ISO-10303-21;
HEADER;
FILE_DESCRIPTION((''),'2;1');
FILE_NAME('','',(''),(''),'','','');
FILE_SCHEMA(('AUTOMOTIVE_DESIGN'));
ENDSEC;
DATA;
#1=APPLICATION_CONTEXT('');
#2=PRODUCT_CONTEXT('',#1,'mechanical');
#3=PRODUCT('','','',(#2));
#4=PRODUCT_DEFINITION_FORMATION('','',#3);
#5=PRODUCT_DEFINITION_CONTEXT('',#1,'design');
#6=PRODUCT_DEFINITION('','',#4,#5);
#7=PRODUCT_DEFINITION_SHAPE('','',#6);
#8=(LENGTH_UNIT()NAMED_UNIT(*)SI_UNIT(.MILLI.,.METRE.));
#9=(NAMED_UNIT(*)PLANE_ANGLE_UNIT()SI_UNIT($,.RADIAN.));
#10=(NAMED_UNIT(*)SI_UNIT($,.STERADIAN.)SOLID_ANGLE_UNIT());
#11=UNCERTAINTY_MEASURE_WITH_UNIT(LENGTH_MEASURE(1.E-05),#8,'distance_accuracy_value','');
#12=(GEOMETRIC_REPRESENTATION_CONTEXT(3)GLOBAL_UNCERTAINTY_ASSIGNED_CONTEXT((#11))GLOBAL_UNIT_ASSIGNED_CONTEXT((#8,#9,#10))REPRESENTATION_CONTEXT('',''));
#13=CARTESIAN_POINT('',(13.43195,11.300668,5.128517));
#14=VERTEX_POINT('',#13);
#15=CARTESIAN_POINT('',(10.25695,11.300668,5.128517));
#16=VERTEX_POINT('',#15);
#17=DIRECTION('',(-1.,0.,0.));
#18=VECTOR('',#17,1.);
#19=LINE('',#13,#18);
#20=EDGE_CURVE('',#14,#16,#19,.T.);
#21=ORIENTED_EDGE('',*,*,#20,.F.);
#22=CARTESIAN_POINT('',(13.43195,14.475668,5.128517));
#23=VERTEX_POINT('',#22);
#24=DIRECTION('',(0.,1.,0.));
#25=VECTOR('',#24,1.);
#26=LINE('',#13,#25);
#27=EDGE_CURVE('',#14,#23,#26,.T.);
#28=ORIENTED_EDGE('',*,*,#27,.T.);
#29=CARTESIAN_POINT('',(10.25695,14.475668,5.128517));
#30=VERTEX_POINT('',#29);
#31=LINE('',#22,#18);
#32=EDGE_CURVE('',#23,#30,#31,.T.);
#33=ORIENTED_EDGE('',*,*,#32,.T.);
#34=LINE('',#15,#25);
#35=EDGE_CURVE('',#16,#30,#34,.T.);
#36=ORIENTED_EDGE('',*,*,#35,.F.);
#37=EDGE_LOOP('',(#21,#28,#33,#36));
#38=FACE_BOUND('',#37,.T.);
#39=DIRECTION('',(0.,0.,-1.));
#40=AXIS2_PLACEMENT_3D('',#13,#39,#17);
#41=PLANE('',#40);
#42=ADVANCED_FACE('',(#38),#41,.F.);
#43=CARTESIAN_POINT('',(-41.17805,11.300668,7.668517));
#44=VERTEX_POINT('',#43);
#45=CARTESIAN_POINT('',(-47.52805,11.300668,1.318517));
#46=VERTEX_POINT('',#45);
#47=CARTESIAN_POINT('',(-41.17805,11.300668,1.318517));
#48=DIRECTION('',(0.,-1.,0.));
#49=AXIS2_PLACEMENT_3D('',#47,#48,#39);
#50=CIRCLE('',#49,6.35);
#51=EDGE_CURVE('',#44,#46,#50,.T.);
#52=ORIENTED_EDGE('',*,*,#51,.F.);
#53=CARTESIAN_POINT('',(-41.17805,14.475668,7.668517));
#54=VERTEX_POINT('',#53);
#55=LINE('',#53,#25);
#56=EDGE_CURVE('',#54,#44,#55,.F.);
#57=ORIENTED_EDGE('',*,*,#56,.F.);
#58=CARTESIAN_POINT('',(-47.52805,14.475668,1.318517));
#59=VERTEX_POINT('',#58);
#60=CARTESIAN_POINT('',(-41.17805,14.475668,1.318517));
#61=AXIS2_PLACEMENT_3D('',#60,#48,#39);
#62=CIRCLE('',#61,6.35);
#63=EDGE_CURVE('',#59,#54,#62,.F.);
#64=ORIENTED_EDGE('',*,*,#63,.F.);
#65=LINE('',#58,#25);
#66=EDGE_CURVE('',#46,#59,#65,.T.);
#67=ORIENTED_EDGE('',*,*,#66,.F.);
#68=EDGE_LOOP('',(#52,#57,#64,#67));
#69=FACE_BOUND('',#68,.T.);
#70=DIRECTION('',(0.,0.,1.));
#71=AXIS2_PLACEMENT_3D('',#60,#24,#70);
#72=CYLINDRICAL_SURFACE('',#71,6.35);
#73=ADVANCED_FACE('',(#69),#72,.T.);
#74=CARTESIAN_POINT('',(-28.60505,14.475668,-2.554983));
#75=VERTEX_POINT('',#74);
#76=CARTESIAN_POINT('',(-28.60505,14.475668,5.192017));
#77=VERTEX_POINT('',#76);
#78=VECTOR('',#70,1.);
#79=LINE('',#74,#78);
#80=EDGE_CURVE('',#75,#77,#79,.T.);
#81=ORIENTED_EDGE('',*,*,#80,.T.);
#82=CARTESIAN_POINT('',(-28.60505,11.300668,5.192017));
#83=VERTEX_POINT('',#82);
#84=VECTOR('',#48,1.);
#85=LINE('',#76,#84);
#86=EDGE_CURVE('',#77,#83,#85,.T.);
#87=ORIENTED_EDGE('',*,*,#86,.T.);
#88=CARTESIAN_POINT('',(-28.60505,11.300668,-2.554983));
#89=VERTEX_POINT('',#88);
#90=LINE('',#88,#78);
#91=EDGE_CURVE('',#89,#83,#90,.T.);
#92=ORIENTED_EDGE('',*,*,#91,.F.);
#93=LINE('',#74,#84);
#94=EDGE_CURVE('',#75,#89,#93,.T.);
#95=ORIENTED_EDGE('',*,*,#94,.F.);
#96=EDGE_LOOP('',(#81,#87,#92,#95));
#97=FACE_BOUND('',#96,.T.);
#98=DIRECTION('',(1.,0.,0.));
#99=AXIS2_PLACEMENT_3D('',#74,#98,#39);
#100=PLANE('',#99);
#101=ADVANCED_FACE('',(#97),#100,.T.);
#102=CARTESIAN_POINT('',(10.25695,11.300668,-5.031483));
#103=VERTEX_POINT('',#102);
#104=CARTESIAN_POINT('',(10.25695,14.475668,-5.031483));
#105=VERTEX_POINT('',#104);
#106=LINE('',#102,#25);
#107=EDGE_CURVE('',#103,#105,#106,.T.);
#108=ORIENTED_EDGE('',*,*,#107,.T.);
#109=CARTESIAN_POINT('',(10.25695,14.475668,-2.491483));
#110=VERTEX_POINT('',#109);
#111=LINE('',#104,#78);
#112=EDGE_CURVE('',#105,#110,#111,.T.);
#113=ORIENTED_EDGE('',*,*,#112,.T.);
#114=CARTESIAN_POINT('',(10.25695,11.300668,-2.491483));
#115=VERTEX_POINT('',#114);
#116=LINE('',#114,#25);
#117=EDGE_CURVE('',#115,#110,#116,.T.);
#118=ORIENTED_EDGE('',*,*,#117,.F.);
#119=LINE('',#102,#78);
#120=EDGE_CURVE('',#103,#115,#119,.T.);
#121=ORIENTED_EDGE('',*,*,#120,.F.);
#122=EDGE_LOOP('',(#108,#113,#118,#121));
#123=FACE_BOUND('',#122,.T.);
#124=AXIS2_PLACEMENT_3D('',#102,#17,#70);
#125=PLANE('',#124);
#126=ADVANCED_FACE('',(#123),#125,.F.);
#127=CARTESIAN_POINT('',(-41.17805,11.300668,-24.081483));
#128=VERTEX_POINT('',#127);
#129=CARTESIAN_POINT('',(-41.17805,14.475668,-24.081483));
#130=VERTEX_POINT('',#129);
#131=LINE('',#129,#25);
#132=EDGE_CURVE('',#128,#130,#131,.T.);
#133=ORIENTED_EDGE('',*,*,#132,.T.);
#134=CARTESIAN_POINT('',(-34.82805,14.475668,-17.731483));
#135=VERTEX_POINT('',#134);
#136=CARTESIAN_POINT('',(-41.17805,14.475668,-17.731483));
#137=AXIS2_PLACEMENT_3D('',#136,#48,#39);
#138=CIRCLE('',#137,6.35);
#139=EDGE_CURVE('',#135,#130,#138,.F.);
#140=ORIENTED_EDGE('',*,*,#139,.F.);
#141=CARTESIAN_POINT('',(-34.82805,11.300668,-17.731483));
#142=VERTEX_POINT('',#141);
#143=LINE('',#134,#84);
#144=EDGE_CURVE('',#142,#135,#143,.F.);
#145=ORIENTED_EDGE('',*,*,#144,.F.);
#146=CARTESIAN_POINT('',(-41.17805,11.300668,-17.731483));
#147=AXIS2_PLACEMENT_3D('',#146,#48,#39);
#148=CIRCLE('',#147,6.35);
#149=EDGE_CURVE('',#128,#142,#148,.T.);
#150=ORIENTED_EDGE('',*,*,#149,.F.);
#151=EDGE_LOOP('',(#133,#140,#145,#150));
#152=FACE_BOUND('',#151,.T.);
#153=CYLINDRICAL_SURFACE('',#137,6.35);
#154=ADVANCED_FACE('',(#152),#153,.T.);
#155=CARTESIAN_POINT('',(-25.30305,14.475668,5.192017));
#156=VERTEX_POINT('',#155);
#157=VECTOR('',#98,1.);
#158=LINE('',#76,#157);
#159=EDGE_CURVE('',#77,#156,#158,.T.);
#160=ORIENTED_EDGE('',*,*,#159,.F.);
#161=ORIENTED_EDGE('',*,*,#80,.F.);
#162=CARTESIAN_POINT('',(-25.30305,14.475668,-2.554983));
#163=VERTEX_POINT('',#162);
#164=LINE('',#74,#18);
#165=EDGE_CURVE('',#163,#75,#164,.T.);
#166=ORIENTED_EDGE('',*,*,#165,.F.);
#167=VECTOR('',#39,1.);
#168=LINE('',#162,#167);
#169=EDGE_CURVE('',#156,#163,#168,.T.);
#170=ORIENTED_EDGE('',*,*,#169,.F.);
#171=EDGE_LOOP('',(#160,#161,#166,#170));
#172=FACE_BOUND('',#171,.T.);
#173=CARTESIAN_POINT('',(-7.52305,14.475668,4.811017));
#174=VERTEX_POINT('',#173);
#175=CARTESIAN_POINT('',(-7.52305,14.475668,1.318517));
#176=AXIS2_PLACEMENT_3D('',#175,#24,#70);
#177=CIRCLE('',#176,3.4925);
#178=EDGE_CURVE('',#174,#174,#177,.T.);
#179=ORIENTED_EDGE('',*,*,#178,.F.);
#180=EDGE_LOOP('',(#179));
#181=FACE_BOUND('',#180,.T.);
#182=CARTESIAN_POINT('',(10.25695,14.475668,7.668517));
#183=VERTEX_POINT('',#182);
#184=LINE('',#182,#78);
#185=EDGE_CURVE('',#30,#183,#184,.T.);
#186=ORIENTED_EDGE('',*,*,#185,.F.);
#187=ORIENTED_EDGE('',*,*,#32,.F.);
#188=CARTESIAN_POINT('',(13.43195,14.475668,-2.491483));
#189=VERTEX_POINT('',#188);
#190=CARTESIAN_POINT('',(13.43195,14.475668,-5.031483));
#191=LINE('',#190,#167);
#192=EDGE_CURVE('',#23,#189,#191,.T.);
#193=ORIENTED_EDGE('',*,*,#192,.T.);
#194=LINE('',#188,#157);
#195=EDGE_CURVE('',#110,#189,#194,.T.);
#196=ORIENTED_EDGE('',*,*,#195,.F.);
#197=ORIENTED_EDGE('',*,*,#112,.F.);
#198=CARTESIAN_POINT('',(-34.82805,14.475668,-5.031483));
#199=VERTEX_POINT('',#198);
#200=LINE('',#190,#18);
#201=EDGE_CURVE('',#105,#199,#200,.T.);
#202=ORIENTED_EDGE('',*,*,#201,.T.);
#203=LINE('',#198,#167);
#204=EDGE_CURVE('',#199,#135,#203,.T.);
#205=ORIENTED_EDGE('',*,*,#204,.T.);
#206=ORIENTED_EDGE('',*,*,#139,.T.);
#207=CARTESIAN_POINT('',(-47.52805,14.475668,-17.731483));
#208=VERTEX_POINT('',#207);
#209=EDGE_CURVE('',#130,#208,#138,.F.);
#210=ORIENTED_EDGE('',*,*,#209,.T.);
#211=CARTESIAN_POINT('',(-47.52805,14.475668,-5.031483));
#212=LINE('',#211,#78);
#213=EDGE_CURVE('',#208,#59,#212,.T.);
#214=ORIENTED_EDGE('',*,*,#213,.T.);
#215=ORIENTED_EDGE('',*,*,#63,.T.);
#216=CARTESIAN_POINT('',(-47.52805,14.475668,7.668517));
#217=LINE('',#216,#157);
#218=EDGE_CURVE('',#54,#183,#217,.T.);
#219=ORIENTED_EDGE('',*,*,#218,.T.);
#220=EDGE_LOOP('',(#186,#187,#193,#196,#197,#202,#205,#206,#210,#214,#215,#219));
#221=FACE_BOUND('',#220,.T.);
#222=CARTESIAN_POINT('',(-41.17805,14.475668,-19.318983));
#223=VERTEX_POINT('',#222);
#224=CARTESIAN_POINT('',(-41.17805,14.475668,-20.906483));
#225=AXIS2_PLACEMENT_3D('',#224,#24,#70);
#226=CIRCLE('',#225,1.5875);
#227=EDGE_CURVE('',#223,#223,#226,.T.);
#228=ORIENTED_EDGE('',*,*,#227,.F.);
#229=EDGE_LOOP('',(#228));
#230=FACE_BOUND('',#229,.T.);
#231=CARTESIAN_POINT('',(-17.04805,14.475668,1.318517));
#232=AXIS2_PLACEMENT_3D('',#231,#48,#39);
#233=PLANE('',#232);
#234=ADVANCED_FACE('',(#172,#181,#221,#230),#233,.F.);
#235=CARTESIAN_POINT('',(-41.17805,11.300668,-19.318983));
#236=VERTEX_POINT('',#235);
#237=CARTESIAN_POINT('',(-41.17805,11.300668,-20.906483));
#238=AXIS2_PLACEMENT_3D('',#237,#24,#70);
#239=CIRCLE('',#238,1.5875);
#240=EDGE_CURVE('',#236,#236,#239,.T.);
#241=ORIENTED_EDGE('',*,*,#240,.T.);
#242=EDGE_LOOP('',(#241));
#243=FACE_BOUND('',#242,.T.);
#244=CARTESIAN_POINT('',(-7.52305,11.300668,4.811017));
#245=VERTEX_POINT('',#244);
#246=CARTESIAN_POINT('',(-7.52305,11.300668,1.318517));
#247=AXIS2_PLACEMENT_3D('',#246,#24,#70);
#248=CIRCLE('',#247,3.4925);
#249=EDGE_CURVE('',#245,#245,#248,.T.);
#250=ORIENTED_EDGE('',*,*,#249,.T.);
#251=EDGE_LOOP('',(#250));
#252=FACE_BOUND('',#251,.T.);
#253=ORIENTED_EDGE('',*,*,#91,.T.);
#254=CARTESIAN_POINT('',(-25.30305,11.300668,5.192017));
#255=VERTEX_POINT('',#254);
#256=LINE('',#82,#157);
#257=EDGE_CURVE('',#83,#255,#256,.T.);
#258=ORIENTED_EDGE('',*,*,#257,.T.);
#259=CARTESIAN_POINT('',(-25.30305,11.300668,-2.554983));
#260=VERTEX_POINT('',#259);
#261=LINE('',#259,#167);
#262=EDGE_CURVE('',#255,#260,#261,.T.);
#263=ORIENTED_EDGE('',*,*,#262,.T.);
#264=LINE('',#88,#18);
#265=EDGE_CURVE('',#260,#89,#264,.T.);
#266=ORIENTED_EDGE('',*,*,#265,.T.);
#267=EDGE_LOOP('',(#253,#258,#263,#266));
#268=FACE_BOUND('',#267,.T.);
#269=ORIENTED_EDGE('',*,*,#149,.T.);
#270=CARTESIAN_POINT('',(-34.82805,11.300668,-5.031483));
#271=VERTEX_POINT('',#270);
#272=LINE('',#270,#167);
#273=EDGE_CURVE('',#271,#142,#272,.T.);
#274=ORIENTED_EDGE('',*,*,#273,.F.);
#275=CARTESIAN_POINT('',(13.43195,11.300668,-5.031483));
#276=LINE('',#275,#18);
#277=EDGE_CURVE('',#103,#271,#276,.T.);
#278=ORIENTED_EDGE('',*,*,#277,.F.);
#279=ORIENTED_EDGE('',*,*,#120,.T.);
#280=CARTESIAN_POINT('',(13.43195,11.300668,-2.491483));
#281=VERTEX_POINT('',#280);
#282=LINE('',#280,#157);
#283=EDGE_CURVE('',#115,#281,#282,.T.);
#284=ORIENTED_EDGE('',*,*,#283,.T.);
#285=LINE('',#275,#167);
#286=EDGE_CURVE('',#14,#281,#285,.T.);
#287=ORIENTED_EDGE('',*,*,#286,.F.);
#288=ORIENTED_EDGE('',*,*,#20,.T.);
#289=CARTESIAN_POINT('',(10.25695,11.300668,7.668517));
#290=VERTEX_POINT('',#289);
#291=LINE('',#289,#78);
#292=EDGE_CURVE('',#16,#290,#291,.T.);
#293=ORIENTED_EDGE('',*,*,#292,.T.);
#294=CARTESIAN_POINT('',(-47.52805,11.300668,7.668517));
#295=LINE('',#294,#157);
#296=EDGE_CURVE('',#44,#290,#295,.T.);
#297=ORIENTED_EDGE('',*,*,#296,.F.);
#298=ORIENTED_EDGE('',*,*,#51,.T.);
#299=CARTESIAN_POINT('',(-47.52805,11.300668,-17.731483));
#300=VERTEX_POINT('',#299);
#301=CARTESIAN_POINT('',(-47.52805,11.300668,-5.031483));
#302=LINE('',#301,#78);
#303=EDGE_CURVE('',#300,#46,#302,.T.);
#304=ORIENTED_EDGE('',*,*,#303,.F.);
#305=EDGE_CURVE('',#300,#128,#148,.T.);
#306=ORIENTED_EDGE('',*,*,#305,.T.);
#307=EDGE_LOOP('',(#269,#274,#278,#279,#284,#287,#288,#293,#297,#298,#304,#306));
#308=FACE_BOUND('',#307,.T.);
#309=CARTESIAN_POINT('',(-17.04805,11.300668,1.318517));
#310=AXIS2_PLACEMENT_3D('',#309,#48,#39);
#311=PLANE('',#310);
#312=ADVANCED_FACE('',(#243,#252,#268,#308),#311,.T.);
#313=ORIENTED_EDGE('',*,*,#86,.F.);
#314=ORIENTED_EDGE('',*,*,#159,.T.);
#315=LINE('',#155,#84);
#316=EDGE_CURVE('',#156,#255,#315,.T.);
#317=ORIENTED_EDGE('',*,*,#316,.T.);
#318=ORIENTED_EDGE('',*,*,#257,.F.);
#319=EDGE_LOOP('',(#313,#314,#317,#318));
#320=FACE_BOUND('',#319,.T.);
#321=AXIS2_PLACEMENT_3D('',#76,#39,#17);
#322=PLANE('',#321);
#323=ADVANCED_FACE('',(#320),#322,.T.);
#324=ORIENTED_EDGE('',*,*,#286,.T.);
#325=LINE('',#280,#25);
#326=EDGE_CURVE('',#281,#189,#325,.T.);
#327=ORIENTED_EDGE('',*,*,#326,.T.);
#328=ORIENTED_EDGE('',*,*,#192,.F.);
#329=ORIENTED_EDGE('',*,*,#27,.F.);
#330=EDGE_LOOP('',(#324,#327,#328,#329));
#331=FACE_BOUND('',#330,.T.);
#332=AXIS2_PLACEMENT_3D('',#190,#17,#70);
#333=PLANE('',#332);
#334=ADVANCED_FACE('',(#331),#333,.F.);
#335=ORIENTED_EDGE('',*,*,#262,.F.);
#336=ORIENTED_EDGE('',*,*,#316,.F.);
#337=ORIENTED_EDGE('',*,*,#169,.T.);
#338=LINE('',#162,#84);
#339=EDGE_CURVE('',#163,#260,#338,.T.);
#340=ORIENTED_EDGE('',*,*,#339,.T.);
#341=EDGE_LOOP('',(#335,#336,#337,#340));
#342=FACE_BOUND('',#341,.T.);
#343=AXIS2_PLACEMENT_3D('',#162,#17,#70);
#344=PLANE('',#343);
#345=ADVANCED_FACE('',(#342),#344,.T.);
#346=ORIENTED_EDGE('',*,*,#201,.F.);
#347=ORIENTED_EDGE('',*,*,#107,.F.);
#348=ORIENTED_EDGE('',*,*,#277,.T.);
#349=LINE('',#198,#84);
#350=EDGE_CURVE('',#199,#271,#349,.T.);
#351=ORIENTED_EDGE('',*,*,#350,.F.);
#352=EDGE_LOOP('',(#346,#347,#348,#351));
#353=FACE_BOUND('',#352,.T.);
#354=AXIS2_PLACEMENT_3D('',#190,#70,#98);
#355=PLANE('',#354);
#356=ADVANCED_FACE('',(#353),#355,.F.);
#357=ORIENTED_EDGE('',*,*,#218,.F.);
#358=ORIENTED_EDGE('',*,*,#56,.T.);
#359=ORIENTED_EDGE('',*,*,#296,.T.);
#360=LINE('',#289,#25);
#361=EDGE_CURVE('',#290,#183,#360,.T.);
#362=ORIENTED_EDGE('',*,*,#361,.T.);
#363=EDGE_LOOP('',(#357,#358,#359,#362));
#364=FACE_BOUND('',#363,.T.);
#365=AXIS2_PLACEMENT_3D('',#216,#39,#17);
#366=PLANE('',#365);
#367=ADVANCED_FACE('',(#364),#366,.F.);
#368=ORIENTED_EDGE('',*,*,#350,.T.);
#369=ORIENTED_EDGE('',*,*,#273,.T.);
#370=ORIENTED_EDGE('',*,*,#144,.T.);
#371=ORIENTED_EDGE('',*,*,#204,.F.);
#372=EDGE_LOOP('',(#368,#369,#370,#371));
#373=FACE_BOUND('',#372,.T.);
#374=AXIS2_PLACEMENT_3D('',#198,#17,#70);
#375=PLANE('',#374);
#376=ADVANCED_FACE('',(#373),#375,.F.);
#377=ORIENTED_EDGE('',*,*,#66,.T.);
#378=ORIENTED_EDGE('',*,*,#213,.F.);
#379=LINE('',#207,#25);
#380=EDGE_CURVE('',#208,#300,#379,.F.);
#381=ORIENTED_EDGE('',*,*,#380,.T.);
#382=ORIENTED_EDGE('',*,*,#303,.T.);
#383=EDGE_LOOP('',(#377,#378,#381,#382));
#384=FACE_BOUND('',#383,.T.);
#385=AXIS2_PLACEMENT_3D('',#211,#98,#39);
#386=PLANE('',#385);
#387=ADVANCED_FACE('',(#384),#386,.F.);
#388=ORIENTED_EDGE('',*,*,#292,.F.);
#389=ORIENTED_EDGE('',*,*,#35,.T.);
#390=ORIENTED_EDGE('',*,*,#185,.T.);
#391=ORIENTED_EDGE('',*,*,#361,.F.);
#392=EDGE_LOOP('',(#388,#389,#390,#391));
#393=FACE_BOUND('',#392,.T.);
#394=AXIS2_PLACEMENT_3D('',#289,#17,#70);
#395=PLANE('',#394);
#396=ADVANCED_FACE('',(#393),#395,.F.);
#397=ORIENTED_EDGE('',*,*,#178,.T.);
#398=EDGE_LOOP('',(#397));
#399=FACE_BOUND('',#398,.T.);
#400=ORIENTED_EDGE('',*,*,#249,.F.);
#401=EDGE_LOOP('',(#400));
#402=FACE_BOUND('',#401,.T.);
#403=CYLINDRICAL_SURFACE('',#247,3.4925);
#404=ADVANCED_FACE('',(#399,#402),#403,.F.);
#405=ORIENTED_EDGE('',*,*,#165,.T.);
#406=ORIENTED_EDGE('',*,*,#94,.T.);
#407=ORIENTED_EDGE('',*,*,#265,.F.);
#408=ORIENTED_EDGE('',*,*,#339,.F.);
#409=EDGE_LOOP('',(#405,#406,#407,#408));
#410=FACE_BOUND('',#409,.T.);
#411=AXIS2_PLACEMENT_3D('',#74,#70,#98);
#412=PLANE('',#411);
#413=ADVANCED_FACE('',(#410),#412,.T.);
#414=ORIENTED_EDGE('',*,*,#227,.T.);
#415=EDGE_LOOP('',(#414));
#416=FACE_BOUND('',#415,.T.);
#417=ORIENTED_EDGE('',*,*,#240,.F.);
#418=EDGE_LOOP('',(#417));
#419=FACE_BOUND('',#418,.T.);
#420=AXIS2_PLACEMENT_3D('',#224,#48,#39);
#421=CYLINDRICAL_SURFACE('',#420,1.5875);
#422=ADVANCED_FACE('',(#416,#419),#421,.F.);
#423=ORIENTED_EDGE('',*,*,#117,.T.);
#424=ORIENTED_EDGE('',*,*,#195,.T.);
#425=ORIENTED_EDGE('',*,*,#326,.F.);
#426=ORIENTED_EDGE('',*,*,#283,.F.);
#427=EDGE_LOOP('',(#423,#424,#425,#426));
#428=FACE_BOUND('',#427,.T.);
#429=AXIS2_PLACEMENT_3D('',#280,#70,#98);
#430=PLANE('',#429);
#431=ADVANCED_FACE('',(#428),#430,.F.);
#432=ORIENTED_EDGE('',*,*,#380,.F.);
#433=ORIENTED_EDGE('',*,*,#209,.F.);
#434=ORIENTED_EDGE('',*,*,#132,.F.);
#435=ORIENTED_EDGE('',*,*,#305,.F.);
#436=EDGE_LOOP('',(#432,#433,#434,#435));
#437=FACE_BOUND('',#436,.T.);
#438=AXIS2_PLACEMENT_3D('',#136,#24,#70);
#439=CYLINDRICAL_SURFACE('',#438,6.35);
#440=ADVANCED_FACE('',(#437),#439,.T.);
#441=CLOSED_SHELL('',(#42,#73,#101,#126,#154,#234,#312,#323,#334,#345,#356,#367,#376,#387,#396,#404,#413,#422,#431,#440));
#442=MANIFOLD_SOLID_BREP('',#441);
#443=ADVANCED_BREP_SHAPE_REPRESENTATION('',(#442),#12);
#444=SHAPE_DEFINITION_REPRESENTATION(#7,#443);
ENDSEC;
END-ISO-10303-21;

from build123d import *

# Parameters (mm, degrees)
HEX_START                = 11.30066774
HEX_OUTER_SIDE_OUTLINE_W = 3.302
HEX_OUTER_SIDE_OUTLINE_H = 7.747
HEX_OUTER_SIDE_OUTLINE_R = 1.5875
HEX_OUTER_SIDE_DEPTH     = 3.175
SKETCH1_R                = 3.4925
CUT_EXTRUDE1_DEPTH       = 3.175


# Read off the part's stored shape, not the designer's step: Hex Outer Side
with BuildPart() as part:
    # Hex Outer Side outline → Hex Outer Side (new body)
    with BuildSketch(Plane(origin=(0, 0, 0), x_dir=(1, 0, 0), z_dir=(0, 1, 0)).offset(HEX_START)):
        with BuildLine():
            Line((-47.528050259, 17.731483109), (-47.528050259, -1.318516891))
            ThreePointArc((-47.528050259, -1.318516891), (-45.66817832, -5.808644951), (-41.178050259, -7.668516891))
            Line((-41.178050259, -7.668516891), (10.256949741, -7.668516891))
            Line((10.256949741, -7.668516891), (10.256949741, -5.128516891))
            Line((10.256949741, -5.128516891), (13.431949741, -5.128516891))
            Line((13.431949741, -5.128516891), (13.431949741, 2.491483109))
            Line((13.431949741, 2.491483109), (10.256949741, 2.491483109))
            Line((10.256949741, 2.491483109), (10.256949741, 5.031483109))
            Line((10.256949741, 5.031483109), (-34.828050259, 5.031483109))
            Line((-34.828050259, 5.031483109), (-34.828050259, 17.731483109))
            ThreePointArc((-34.828050259, 17.731483109), (-36.687922199, 22.22161117), (-41.178050259, 24.081483109))
            ThreePointArc((-41.178050259, 24.081483109), (-45.668178319, 22.221611169), (-47.528050259, 17.731483109))
        make_face()
        with Locations((-26.954050259, -1.318516891)):
            Rectangle(HEX_OUTER_SIDE_OUTLINE_W, HEX_OUTER_SIDE_OUTLINE_H, mode=Mode.SUBTRACT)
        with Locations((-41.178050259, 20.906483109)):
            Circle(HEX_OUTER_SIDE_OUTLINE_R, mode=Mode.SUBTRACT)
    extrude(amount=HEX_OUTER_SIDE_DEPTH)

    # Sketch1 → Cut-Extrude1 (cut)
    with BuildSketch(Plane(origin=(0, 14.47566774, 0), x_dir=(1, 0, 0), z_dir=(0, 1, 0))):
        with Locations(Location((-7.523050259, -1.318516891, 0), (0, 0, 270))):
            Circle(SKETCH1_R)
    extrude(amount=-CUT_EXTRUDE1_DEPTH, mode=Mode.SUBTRACT)


solid = part.part
